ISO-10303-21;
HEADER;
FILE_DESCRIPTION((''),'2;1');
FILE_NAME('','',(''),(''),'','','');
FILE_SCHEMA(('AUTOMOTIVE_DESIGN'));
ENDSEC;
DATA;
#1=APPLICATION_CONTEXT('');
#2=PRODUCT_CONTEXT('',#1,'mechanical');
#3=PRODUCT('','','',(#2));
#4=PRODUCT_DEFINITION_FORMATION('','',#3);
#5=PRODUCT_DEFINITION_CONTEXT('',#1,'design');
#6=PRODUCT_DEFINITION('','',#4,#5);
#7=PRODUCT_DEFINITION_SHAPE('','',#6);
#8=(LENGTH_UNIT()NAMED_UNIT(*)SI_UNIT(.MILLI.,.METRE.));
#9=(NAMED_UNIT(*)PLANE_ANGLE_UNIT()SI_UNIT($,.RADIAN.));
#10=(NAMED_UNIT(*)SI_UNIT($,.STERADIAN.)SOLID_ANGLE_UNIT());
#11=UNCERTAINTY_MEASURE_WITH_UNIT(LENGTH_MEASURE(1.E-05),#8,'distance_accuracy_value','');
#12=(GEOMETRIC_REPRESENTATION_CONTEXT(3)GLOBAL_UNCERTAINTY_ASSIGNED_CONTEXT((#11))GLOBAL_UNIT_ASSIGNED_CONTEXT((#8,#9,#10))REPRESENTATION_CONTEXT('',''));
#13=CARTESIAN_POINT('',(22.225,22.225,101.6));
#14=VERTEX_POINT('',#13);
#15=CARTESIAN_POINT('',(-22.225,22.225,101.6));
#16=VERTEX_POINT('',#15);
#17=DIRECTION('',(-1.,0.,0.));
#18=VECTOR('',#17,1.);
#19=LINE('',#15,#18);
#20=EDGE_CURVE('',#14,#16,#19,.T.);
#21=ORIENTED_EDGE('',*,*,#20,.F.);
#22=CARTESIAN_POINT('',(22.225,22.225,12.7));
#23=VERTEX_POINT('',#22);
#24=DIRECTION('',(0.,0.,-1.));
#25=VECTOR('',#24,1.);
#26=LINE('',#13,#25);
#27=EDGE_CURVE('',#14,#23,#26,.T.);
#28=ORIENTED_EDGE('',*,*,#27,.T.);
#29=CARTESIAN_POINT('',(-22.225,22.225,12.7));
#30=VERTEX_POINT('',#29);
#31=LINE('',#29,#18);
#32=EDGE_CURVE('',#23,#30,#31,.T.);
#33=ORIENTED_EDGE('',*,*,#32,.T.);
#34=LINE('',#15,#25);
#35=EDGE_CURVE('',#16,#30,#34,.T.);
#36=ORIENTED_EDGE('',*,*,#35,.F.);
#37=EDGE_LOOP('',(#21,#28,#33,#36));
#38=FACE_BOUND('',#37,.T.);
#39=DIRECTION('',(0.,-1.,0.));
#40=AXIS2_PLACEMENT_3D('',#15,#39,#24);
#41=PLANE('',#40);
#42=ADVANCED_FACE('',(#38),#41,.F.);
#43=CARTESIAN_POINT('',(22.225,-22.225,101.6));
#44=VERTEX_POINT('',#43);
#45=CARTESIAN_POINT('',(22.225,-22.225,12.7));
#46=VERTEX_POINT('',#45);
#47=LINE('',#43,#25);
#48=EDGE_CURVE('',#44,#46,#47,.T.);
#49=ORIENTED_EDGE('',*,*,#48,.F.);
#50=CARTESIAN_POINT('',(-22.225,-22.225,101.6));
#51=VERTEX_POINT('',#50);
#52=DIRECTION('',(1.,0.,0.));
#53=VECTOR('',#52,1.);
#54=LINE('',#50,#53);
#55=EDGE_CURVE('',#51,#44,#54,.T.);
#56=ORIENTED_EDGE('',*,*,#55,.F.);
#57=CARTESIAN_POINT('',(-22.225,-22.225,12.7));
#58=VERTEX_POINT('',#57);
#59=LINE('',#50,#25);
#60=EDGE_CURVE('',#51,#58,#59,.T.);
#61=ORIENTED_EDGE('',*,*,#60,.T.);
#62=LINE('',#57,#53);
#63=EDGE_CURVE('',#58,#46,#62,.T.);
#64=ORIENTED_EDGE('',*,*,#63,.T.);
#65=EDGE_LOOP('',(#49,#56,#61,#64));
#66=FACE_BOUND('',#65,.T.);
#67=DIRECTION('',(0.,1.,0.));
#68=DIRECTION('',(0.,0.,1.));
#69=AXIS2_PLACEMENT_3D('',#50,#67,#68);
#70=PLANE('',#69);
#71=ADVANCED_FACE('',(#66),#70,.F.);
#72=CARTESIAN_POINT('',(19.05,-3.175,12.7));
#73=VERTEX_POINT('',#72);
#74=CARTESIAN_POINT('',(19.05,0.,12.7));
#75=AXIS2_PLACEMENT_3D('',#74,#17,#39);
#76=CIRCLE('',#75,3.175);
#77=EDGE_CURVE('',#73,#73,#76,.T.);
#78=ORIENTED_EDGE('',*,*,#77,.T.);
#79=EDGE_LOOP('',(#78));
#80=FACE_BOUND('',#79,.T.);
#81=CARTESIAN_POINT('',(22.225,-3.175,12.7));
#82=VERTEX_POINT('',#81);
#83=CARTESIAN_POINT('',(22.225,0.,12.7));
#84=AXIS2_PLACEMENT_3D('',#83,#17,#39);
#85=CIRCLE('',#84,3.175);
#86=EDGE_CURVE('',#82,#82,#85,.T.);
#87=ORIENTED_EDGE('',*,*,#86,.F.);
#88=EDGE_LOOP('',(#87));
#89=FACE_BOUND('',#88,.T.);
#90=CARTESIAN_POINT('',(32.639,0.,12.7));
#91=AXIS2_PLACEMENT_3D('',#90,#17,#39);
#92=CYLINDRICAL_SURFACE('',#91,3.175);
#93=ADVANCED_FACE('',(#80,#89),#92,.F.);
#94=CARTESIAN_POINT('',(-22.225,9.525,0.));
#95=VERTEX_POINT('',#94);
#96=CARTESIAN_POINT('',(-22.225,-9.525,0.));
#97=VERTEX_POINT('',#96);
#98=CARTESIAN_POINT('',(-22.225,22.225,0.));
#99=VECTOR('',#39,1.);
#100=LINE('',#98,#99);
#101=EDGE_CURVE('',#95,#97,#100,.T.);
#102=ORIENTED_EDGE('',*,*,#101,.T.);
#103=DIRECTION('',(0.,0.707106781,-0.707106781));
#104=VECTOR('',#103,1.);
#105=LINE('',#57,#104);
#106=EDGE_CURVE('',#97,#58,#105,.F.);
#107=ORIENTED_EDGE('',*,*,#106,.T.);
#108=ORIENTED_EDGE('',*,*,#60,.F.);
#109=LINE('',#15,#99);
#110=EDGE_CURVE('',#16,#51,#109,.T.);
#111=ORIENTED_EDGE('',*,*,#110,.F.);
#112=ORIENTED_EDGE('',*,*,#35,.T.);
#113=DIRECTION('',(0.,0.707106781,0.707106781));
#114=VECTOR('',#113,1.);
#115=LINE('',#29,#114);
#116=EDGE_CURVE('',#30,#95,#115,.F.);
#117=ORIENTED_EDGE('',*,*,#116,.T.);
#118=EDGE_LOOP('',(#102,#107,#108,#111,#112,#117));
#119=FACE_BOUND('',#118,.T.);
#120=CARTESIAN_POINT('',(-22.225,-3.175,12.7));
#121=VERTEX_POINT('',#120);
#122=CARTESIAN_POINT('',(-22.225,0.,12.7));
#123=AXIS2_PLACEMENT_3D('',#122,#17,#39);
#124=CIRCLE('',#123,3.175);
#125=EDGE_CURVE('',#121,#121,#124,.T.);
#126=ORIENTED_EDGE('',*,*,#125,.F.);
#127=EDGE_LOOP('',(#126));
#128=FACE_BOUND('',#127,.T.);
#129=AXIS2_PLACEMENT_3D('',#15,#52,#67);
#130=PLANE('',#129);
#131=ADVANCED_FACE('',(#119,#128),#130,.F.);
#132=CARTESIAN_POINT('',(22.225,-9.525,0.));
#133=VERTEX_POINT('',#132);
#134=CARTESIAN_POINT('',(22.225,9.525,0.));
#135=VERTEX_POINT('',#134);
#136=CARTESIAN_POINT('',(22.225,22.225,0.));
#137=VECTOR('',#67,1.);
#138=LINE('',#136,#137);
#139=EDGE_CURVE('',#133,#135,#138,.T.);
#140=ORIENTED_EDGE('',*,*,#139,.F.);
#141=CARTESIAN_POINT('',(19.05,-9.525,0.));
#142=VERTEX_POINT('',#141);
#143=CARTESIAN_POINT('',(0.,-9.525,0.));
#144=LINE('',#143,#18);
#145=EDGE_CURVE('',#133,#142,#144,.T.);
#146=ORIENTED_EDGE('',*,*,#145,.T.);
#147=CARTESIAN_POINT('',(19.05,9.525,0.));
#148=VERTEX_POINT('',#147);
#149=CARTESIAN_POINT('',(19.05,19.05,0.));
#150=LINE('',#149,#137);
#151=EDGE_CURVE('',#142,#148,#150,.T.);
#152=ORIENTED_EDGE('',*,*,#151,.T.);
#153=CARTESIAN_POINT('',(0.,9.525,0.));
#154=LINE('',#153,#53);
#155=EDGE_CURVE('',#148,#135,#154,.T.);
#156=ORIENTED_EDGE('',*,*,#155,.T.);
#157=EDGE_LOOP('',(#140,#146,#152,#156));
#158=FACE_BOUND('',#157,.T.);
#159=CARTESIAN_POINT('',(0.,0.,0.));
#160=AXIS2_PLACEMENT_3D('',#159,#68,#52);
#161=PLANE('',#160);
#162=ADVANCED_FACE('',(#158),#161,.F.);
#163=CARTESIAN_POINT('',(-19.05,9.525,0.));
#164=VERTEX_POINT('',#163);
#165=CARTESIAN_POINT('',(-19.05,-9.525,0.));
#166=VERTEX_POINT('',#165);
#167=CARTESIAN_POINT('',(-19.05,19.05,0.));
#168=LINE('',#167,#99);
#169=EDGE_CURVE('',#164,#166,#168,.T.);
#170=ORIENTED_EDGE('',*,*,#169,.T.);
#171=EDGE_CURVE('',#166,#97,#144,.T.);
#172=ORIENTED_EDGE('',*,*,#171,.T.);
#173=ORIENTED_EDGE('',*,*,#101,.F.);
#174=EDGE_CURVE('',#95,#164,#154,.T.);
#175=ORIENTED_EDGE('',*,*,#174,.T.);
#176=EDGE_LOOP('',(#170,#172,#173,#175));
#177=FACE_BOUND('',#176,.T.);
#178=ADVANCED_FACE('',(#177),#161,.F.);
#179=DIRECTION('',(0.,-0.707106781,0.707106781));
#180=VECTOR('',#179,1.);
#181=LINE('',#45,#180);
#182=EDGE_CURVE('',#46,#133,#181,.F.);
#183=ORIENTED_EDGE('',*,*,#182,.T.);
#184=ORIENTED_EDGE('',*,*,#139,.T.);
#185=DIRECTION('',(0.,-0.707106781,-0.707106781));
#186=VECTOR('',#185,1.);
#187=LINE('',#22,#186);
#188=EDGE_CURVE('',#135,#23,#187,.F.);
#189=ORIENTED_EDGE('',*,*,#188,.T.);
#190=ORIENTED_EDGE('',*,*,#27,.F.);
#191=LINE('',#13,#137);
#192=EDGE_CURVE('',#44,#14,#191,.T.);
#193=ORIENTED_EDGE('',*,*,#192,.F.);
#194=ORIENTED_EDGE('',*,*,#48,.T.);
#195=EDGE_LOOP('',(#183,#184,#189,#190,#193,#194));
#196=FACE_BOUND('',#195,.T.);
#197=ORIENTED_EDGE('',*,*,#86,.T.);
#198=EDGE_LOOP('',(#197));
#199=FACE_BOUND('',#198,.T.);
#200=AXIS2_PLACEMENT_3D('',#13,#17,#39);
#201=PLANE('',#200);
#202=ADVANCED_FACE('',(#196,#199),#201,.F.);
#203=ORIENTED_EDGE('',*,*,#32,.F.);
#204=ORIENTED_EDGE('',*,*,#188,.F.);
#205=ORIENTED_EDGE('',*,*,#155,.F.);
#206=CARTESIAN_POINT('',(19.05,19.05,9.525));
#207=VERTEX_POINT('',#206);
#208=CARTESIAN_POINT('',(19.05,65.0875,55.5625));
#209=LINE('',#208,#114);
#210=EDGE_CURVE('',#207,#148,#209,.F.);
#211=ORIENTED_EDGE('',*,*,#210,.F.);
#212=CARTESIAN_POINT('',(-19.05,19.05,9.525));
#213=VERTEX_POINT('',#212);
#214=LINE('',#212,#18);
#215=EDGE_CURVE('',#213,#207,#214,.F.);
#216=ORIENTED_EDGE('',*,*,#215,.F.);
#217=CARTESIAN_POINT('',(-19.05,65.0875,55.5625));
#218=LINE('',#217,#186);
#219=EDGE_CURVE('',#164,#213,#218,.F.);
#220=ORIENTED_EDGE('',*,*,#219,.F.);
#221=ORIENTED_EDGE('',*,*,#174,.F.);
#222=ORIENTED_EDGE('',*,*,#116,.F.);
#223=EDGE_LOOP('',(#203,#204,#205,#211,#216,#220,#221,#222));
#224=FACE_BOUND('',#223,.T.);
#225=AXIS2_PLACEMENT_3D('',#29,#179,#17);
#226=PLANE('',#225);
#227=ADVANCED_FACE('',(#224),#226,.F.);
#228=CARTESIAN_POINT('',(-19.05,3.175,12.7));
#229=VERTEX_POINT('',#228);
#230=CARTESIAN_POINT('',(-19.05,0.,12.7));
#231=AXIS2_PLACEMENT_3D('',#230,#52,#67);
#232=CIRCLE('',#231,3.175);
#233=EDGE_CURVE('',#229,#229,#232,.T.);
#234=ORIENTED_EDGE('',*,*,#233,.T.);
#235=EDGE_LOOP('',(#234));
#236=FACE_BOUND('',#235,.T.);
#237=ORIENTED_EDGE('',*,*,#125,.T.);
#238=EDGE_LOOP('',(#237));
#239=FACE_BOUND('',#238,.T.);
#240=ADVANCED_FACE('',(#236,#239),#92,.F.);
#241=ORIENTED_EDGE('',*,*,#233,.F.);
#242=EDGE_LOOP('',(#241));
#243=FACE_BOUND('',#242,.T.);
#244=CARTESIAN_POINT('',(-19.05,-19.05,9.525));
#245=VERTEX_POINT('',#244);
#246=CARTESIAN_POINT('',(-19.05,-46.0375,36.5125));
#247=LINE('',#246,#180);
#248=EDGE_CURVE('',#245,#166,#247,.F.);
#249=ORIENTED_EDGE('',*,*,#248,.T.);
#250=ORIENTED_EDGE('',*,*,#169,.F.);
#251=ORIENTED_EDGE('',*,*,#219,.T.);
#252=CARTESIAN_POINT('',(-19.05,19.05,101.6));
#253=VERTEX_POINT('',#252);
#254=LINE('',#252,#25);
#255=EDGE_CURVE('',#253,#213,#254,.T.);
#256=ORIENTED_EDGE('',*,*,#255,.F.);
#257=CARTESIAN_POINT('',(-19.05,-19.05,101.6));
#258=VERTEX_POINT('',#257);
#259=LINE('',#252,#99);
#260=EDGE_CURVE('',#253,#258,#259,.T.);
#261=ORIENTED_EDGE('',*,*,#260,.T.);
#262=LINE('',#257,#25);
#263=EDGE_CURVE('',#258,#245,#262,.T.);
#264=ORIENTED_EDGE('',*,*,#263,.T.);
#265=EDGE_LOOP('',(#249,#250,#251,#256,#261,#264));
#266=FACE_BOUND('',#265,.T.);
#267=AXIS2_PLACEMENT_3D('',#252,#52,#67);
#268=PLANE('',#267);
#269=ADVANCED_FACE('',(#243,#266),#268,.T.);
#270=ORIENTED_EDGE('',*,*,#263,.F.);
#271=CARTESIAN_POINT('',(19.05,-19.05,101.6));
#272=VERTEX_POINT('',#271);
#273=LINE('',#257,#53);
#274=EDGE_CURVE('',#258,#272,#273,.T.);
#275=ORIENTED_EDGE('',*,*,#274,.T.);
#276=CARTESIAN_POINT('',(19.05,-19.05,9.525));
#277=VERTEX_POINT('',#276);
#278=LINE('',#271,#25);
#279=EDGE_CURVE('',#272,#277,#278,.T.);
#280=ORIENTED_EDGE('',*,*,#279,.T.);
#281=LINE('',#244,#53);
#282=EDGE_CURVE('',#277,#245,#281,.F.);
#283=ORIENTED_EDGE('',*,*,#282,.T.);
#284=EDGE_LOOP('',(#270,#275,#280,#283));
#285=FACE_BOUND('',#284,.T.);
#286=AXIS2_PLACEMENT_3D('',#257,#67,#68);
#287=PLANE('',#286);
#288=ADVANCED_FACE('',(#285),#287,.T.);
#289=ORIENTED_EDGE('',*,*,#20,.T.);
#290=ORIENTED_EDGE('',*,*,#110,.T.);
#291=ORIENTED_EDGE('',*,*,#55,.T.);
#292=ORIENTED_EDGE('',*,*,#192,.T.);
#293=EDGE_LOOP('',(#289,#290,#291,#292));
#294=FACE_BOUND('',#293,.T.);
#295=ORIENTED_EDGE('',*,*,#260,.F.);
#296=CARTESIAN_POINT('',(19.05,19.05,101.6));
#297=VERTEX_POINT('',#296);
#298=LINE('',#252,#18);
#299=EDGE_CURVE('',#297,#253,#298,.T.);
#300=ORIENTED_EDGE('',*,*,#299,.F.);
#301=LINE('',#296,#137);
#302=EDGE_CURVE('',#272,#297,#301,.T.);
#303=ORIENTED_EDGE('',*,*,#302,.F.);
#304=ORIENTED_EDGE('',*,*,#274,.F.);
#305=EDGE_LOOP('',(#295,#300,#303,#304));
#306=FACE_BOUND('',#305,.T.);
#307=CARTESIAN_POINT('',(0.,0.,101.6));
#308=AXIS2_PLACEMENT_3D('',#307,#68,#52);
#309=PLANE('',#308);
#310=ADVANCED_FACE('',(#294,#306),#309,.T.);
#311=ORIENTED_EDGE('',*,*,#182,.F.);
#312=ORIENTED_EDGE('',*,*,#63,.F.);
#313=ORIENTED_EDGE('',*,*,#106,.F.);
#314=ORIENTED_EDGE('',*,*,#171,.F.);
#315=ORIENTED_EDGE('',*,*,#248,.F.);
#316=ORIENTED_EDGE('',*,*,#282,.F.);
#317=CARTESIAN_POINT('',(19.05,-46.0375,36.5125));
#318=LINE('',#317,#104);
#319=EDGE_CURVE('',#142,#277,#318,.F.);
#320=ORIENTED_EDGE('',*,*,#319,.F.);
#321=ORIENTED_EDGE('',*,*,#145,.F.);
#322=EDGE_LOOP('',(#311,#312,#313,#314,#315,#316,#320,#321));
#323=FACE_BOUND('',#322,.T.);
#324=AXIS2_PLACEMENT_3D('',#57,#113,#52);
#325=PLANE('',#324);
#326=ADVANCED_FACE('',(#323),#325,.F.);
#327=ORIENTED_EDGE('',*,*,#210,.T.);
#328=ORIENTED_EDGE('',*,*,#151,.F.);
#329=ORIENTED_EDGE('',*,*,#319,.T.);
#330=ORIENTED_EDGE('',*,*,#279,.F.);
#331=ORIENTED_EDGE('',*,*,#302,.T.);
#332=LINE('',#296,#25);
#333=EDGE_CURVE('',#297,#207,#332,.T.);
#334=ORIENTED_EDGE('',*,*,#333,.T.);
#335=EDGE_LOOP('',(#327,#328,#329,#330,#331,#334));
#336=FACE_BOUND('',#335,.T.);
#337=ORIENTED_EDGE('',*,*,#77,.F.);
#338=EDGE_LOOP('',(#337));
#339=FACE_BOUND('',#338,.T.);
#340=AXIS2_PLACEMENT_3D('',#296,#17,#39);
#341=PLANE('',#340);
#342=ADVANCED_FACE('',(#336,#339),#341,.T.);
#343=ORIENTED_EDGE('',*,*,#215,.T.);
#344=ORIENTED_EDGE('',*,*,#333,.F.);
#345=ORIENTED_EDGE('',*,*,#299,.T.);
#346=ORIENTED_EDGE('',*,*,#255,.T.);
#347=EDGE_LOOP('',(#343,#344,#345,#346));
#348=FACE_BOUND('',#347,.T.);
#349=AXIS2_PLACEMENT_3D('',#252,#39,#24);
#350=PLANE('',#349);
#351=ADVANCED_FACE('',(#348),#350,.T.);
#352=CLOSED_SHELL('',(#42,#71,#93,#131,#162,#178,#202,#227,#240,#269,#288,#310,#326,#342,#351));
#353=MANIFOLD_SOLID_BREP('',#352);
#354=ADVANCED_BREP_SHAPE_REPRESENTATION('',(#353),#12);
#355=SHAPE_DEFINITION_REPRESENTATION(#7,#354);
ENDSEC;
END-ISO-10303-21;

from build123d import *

# Parameters (mm, degrees)
SKETCH2_W           = 44.45
SKETCH2_H           = 44.45
SKETCH2_W_2         = 38.1
SKETCH2_H_2         = 38.1
BOSS_EXTRUDE1_DEPTH = 101.6
SKETCH5_R           = 3.175
CUT_EXTRUDE1_DEPTH  = 54.864
CHAMFER1_SIZE       = 12.7


with BuildPart() as part:
    # Sketch2 → Boss-Extrude1 (new body)
    with BuildSketch(Plane.XY):
        Rectangle(SKETCH2_W, SKETCH2_H)
        Rectangle(SKETCH2_W_2, SKETCH2_H_2, mode=Mode.SUBTRACT)
    extrude(amount=BOSS_EXTRUDE1_DEPTH)

    # Sketch5 → Cut-Extrude1 (cut)
    with BuildSketch(Plane.ZY.offset(22.225)):
        with Locations(Location((12.7, 0, 0), (0, 0, 270))):
            Circle(SKETCH5_R)
    extrude(amount=-CUT_EXTRUDE1_DEPTH, mode=Mode.SUBTRACT)

    # Chamfer1
    # the kernel refuses this chamfer: 12.7 mm, written as the material it takes off along each edge
    with BuildSketch(Plane(origin=(54.885373947, -22.225, 0), x_dir=(0, 0.9996219169112966, -0.02749587661058637), z_dir=(-1, 0, 0))) as chamfer1_piece_1:
        Polygon((CHAMFER1_SIZE * 0.999621916911, -CHAMFER1_SIZE * 0.0274958766106), (-CHAMFER1_SIZE * 0.0274958766106, -CHAMFER1_SIZE * 0.999621916911), (0, 0), align=None)
    extrude(amount=109.770747894, mode=Mode.SUBTRACT)
    with BuildSketch(Plane(origin=(-54.885373947, 22.225, 0), x_dir=(0, 0.02749587661058647, 0.9996219169112966), z_dir=(1, 0, 0))) as chamfer1_piece_2:
        Polygon((CHAMFER1_SIZE * 0.999621916911, CHAMFER1_SIZE * 0.0274958766106), (-CHAMFER1_SIZE * 0.0274958766106, CHAMFER1_SIZE * 0.999621916911), (0, 0), align=None)
    extrude(amount=109.770747894, mode=Mode.SUBTRACT)


solid = part.part
